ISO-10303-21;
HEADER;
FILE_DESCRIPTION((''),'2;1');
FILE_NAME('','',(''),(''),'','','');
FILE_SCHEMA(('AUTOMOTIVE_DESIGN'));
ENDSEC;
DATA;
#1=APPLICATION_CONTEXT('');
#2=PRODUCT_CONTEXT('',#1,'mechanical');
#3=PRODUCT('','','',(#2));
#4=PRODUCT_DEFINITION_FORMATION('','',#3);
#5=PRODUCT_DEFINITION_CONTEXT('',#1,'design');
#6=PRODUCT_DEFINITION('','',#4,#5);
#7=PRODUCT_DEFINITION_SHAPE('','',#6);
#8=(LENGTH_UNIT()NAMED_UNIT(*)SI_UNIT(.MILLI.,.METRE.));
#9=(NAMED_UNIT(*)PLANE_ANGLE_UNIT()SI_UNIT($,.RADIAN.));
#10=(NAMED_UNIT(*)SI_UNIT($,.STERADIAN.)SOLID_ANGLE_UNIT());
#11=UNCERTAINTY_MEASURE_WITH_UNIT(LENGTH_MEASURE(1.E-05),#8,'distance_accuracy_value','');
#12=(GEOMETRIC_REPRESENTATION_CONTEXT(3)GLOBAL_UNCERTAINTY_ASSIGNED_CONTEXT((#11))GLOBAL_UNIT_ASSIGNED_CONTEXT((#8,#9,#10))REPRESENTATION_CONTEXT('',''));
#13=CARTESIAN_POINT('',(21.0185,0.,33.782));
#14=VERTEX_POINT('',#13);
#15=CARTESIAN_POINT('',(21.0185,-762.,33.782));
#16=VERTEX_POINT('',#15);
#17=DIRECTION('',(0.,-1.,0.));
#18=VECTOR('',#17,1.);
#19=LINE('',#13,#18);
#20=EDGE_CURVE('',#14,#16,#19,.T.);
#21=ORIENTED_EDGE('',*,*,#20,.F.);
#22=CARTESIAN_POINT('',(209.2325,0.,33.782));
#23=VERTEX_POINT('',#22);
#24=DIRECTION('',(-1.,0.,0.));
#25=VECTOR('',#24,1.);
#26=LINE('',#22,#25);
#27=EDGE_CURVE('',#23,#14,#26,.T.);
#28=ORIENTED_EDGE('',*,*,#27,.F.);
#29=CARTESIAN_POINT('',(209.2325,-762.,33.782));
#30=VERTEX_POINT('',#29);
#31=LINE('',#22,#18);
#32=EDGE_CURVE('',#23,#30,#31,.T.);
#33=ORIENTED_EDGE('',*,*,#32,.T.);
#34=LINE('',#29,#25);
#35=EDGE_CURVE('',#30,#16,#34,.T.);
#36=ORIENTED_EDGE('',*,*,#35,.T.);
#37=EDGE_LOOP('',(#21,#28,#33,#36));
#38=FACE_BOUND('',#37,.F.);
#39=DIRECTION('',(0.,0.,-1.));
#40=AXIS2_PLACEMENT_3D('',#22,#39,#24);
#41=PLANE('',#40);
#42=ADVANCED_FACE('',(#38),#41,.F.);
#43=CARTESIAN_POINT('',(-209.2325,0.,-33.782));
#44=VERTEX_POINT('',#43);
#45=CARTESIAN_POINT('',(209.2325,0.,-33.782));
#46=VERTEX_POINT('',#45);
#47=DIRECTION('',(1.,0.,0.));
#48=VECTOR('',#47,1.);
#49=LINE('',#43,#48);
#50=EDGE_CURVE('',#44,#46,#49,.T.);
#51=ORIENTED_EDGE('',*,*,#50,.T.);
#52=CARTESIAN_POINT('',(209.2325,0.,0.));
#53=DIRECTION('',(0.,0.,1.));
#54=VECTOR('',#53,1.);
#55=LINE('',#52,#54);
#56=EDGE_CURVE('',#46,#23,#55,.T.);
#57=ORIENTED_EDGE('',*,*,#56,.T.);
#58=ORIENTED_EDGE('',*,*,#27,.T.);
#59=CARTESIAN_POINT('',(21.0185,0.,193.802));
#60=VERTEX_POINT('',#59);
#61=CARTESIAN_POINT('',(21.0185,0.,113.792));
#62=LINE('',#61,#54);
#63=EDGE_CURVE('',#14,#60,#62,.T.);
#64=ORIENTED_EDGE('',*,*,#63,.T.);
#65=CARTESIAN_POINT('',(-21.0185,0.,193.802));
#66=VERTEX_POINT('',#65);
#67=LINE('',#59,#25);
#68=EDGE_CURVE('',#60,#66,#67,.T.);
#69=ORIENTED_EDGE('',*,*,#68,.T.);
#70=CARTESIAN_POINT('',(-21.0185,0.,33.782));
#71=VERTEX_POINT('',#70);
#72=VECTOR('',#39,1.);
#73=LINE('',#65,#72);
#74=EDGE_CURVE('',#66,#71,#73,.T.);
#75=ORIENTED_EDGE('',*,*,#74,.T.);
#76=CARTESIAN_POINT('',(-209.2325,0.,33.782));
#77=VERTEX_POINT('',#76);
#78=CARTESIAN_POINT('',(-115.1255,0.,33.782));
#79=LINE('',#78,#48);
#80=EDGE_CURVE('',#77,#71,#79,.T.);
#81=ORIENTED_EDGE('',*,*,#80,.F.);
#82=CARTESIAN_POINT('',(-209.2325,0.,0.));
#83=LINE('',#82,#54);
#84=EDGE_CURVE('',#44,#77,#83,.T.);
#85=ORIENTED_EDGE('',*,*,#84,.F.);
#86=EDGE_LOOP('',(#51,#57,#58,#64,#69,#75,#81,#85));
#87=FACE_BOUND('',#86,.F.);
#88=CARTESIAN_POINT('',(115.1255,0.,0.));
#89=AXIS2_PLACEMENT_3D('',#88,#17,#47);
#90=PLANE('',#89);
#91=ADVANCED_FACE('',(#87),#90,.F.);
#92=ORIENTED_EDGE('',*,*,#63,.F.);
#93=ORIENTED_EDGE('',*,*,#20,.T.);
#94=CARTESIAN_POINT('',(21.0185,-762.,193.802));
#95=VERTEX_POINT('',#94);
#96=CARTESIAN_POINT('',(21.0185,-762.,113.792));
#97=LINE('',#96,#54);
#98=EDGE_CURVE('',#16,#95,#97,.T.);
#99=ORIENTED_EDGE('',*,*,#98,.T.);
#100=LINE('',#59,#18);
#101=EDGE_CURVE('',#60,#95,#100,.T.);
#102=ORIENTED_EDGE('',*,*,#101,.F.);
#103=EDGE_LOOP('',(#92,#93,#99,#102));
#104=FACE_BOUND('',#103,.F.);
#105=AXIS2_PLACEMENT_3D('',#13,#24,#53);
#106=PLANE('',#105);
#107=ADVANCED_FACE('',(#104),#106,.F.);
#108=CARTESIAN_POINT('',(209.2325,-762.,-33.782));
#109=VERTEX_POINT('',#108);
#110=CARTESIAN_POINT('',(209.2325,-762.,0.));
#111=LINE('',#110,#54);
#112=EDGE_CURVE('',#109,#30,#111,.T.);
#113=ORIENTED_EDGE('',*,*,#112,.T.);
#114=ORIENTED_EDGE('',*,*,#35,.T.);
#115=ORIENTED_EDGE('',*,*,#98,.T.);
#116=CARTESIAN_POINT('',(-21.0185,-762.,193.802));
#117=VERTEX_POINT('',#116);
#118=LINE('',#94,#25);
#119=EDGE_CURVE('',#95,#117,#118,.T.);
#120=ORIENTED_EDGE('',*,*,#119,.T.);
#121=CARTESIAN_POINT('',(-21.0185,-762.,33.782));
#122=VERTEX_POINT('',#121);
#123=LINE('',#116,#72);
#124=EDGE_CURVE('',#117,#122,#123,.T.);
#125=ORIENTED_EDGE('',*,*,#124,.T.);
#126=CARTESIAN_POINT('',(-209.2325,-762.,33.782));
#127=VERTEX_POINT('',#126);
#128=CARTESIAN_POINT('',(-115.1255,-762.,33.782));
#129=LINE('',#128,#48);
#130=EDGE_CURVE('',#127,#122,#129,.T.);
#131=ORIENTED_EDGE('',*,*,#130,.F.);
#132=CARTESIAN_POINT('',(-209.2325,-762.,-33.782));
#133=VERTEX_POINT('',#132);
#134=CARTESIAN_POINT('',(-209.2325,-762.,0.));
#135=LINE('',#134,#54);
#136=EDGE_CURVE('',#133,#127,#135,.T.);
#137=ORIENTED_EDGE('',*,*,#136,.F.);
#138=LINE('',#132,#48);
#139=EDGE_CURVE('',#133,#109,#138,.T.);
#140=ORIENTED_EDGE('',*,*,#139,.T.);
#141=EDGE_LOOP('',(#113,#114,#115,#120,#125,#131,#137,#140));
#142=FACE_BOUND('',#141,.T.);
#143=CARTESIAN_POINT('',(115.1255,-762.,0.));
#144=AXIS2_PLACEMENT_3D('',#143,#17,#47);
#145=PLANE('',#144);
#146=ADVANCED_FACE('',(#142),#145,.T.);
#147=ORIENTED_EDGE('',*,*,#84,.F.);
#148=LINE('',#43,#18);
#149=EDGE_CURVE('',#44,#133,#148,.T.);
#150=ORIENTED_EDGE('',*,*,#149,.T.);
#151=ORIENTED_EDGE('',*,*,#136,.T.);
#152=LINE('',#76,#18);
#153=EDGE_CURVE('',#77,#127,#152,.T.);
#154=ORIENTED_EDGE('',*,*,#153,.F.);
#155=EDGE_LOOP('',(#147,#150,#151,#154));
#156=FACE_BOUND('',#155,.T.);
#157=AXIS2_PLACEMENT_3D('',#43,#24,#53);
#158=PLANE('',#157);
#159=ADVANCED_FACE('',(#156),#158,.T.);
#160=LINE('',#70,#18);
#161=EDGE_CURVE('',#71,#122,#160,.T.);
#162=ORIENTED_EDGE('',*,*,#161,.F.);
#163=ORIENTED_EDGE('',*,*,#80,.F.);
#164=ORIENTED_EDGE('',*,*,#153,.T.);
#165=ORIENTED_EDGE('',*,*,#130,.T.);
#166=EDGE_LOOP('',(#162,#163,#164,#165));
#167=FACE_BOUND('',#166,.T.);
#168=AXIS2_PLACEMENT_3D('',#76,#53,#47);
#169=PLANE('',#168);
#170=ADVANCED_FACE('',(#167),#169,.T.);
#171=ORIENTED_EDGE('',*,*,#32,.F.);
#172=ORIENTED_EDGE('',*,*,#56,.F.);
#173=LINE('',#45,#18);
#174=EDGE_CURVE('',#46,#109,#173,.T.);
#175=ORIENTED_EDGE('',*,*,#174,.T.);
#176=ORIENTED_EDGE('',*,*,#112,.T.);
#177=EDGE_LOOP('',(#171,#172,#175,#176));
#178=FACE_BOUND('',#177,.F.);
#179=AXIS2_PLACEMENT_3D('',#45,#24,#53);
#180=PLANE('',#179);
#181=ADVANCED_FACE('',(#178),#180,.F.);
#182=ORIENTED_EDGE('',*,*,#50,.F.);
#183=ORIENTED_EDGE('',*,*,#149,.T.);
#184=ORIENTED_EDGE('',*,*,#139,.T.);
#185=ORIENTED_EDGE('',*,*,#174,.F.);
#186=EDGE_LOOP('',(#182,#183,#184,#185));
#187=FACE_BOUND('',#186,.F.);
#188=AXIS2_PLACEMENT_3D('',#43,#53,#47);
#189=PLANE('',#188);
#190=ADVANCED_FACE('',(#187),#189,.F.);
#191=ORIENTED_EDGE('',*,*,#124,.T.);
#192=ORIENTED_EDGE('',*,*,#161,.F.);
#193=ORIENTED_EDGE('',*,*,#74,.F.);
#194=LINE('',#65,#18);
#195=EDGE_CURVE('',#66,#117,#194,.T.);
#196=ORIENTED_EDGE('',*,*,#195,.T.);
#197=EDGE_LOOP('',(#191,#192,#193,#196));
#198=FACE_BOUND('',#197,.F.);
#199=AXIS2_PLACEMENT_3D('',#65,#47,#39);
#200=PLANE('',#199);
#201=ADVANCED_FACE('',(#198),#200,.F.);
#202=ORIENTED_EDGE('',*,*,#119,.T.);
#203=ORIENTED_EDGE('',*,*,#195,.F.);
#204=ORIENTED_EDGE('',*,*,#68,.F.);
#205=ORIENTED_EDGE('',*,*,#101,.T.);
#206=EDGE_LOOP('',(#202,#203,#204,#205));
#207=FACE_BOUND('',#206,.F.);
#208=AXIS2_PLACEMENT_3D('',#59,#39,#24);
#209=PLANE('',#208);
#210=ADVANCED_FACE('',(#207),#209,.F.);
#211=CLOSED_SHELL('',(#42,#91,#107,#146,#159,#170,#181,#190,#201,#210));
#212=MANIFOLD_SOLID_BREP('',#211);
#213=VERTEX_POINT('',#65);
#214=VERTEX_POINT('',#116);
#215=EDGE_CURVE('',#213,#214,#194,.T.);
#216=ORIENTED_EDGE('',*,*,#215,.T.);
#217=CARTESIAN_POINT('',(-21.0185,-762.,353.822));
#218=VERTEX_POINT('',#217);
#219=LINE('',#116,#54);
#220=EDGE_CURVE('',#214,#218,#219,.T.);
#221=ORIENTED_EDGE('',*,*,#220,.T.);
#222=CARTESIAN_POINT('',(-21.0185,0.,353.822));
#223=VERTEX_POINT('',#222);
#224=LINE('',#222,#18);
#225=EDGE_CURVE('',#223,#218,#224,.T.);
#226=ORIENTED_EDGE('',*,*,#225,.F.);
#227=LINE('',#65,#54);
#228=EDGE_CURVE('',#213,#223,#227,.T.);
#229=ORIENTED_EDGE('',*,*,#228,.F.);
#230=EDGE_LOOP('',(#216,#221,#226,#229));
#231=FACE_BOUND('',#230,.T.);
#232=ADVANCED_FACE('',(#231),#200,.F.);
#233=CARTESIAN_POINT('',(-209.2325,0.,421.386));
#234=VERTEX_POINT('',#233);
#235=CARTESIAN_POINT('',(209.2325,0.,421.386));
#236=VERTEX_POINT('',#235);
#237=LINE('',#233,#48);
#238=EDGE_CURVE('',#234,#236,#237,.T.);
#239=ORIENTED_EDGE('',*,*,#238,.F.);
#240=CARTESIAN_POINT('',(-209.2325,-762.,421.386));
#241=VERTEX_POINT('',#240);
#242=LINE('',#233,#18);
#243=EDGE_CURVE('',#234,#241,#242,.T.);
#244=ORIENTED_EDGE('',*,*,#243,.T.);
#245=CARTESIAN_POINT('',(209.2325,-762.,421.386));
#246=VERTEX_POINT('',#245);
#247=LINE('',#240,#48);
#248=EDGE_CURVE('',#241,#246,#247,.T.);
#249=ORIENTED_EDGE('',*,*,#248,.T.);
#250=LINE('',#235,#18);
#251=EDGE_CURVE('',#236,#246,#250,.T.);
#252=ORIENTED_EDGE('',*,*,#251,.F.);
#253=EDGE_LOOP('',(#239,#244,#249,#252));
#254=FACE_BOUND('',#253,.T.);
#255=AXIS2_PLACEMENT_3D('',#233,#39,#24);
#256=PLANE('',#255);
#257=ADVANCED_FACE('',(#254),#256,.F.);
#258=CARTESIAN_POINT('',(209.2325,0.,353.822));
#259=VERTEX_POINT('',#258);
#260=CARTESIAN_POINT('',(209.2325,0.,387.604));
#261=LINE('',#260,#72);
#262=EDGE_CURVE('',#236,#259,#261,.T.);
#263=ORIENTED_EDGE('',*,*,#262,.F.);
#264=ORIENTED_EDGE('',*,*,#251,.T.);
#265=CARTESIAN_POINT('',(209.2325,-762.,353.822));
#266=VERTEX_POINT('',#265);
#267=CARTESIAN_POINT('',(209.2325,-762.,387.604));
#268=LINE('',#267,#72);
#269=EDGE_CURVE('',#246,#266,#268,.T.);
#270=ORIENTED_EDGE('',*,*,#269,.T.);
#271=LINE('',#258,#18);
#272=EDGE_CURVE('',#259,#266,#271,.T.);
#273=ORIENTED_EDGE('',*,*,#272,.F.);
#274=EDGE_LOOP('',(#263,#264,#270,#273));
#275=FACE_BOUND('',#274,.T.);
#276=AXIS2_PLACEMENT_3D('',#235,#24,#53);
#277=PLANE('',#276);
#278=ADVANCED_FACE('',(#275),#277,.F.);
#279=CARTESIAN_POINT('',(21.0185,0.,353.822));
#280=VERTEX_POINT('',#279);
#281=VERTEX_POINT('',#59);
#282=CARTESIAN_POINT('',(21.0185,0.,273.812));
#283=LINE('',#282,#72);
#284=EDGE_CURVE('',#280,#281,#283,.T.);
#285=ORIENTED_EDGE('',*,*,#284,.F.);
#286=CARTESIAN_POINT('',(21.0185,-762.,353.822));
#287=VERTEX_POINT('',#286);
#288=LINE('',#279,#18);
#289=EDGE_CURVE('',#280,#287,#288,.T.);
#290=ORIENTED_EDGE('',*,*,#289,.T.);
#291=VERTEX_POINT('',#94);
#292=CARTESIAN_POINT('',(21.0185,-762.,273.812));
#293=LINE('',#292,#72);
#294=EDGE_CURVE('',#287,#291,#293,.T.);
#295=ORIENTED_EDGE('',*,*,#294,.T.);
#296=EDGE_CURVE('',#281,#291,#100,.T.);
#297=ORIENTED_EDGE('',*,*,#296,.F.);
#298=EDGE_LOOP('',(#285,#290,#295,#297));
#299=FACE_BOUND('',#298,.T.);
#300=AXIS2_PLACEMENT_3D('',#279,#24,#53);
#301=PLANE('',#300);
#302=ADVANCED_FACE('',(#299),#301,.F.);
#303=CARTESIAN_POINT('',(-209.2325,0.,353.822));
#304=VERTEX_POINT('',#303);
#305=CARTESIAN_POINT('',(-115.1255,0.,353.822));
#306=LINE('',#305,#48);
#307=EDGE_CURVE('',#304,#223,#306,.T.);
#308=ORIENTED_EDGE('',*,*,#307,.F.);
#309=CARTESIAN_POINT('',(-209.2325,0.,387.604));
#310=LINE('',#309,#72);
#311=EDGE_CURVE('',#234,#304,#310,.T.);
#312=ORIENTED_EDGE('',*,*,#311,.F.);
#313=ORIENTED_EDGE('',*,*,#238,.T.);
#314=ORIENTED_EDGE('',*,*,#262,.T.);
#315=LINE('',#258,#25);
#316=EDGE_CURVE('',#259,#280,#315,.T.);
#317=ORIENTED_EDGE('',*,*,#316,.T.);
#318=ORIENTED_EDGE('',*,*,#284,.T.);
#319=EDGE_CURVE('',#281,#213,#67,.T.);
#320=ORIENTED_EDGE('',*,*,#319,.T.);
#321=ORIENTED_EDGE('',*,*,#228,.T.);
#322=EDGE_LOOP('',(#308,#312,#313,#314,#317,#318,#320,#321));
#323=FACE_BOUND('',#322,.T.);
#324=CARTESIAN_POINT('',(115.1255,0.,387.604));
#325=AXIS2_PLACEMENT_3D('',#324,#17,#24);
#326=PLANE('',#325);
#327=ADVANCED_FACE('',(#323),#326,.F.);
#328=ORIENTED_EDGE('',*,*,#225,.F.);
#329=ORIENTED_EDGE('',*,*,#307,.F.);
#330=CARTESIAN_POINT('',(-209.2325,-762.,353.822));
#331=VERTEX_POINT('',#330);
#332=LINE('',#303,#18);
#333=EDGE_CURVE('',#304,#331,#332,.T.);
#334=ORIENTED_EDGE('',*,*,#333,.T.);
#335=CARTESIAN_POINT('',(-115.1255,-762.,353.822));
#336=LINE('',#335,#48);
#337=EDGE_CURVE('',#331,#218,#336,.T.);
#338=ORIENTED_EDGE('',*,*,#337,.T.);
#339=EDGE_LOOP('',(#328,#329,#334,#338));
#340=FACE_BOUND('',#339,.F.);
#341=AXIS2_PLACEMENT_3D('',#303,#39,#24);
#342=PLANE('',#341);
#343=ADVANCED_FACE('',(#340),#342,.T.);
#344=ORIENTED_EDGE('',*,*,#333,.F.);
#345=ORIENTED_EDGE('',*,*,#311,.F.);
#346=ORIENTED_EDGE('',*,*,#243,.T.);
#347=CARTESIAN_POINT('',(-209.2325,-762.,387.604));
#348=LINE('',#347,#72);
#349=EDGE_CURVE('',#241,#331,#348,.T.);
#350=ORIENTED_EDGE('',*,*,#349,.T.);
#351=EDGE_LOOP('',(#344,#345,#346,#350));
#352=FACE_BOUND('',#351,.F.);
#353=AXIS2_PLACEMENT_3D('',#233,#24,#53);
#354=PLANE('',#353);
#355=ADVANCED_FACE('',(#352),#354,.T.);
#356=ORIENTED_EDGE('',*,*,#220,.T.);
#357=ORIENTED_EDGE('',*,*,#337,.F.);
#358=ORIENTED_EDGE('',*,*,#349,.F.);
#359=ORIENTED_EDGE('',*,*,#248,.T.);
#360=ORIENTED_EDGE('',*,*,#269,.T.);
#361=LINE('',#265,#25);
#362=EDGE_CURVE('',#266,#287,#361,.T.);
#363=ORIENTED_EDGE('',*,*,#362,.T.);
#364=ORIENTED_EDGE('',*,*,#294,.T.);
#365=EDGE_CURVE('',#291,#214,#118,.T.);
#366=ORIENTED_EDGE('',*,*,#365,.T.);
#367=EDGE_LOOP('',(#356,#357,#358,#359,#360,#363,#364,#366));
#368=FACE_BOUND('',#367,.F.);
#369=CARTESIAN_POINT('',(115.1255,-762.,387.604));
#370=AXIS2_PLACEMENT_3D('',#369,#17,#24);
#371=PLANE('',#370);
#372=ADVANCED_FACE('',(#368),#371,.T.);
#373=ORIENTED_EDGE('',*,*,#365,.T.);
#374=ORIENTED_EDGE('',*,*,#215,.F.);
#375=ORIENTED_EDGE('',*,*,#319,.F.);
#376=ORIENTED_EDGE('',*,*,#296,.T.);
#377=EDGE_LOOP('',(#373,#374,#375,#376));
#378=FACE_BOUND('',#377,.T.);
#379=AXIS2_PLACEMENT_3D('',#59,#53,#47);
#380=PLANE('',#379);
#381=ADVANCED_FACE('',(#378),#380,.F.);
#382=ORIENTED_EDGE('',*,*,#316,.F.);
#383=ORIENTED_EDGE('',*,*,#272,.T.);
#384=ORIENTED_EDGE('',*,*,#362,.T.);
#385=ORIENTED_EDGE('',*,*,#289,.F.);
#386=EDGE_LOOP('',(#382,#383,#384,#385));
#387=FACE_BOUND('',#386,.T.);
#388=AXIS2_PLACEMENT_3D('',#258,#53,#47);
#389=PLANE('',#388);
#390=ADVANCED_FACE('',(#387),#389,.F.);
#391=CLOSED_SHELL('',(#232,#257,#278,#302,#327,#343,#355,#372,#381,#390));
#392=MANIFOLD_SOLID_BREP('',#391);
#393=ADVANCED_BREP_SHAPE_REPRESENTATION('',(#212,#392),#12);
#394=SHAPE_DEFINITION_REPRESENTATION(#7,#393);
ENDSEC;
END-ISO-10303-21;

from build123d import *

# Parameters (mm, degrees)
F0_W     = 188.214
F0_H     = 67.564
F0_W_2   = 21.0185
F0_H_2   = 160.02
F1_DEPTH = 762


# Not quite as in the source:
# - a pattern or mirror of a feature is missing from the dataset's text; its kind, count and spacing are read off the source's solid


with BuildPart() as f1:
    # F0 (on Front) → F1 (new body)
    with BuildSketch(Plane.XZ):
        with Locations((115.1255, 0)):
            Rectangle(F0_W, F0_H)
        Polygon((21.0185, -33.782), (21.0185, 33.782), (0, 33.782), (0, 0), (0, -33.782), align=None)
        with Locations((10.50925, 113.792)):
            Rectangle(F0_W_2, F0_H_2)
        Polygon((0, 0), (0, 33.782), (-21.0185, 33.782), (-21.0185, -33.782), (0, -33.782), align=None)
        with Locations((-10.50925, 113.792)):
            Rectangle(F0_W_2, F0_H_2)
        with Locations((-115.1255, 0)):
            Rectangle(F0_W, F0_H)
    extrude(amount=F1_DEPTH)


with BuildPart() as f1_copies_1:
    # F1_copies: instance of F1
    add(f1.part.mirror(Plane.XY.offset(193.802)))


solid = Compound([f1.part, f1_copies_1.part])
